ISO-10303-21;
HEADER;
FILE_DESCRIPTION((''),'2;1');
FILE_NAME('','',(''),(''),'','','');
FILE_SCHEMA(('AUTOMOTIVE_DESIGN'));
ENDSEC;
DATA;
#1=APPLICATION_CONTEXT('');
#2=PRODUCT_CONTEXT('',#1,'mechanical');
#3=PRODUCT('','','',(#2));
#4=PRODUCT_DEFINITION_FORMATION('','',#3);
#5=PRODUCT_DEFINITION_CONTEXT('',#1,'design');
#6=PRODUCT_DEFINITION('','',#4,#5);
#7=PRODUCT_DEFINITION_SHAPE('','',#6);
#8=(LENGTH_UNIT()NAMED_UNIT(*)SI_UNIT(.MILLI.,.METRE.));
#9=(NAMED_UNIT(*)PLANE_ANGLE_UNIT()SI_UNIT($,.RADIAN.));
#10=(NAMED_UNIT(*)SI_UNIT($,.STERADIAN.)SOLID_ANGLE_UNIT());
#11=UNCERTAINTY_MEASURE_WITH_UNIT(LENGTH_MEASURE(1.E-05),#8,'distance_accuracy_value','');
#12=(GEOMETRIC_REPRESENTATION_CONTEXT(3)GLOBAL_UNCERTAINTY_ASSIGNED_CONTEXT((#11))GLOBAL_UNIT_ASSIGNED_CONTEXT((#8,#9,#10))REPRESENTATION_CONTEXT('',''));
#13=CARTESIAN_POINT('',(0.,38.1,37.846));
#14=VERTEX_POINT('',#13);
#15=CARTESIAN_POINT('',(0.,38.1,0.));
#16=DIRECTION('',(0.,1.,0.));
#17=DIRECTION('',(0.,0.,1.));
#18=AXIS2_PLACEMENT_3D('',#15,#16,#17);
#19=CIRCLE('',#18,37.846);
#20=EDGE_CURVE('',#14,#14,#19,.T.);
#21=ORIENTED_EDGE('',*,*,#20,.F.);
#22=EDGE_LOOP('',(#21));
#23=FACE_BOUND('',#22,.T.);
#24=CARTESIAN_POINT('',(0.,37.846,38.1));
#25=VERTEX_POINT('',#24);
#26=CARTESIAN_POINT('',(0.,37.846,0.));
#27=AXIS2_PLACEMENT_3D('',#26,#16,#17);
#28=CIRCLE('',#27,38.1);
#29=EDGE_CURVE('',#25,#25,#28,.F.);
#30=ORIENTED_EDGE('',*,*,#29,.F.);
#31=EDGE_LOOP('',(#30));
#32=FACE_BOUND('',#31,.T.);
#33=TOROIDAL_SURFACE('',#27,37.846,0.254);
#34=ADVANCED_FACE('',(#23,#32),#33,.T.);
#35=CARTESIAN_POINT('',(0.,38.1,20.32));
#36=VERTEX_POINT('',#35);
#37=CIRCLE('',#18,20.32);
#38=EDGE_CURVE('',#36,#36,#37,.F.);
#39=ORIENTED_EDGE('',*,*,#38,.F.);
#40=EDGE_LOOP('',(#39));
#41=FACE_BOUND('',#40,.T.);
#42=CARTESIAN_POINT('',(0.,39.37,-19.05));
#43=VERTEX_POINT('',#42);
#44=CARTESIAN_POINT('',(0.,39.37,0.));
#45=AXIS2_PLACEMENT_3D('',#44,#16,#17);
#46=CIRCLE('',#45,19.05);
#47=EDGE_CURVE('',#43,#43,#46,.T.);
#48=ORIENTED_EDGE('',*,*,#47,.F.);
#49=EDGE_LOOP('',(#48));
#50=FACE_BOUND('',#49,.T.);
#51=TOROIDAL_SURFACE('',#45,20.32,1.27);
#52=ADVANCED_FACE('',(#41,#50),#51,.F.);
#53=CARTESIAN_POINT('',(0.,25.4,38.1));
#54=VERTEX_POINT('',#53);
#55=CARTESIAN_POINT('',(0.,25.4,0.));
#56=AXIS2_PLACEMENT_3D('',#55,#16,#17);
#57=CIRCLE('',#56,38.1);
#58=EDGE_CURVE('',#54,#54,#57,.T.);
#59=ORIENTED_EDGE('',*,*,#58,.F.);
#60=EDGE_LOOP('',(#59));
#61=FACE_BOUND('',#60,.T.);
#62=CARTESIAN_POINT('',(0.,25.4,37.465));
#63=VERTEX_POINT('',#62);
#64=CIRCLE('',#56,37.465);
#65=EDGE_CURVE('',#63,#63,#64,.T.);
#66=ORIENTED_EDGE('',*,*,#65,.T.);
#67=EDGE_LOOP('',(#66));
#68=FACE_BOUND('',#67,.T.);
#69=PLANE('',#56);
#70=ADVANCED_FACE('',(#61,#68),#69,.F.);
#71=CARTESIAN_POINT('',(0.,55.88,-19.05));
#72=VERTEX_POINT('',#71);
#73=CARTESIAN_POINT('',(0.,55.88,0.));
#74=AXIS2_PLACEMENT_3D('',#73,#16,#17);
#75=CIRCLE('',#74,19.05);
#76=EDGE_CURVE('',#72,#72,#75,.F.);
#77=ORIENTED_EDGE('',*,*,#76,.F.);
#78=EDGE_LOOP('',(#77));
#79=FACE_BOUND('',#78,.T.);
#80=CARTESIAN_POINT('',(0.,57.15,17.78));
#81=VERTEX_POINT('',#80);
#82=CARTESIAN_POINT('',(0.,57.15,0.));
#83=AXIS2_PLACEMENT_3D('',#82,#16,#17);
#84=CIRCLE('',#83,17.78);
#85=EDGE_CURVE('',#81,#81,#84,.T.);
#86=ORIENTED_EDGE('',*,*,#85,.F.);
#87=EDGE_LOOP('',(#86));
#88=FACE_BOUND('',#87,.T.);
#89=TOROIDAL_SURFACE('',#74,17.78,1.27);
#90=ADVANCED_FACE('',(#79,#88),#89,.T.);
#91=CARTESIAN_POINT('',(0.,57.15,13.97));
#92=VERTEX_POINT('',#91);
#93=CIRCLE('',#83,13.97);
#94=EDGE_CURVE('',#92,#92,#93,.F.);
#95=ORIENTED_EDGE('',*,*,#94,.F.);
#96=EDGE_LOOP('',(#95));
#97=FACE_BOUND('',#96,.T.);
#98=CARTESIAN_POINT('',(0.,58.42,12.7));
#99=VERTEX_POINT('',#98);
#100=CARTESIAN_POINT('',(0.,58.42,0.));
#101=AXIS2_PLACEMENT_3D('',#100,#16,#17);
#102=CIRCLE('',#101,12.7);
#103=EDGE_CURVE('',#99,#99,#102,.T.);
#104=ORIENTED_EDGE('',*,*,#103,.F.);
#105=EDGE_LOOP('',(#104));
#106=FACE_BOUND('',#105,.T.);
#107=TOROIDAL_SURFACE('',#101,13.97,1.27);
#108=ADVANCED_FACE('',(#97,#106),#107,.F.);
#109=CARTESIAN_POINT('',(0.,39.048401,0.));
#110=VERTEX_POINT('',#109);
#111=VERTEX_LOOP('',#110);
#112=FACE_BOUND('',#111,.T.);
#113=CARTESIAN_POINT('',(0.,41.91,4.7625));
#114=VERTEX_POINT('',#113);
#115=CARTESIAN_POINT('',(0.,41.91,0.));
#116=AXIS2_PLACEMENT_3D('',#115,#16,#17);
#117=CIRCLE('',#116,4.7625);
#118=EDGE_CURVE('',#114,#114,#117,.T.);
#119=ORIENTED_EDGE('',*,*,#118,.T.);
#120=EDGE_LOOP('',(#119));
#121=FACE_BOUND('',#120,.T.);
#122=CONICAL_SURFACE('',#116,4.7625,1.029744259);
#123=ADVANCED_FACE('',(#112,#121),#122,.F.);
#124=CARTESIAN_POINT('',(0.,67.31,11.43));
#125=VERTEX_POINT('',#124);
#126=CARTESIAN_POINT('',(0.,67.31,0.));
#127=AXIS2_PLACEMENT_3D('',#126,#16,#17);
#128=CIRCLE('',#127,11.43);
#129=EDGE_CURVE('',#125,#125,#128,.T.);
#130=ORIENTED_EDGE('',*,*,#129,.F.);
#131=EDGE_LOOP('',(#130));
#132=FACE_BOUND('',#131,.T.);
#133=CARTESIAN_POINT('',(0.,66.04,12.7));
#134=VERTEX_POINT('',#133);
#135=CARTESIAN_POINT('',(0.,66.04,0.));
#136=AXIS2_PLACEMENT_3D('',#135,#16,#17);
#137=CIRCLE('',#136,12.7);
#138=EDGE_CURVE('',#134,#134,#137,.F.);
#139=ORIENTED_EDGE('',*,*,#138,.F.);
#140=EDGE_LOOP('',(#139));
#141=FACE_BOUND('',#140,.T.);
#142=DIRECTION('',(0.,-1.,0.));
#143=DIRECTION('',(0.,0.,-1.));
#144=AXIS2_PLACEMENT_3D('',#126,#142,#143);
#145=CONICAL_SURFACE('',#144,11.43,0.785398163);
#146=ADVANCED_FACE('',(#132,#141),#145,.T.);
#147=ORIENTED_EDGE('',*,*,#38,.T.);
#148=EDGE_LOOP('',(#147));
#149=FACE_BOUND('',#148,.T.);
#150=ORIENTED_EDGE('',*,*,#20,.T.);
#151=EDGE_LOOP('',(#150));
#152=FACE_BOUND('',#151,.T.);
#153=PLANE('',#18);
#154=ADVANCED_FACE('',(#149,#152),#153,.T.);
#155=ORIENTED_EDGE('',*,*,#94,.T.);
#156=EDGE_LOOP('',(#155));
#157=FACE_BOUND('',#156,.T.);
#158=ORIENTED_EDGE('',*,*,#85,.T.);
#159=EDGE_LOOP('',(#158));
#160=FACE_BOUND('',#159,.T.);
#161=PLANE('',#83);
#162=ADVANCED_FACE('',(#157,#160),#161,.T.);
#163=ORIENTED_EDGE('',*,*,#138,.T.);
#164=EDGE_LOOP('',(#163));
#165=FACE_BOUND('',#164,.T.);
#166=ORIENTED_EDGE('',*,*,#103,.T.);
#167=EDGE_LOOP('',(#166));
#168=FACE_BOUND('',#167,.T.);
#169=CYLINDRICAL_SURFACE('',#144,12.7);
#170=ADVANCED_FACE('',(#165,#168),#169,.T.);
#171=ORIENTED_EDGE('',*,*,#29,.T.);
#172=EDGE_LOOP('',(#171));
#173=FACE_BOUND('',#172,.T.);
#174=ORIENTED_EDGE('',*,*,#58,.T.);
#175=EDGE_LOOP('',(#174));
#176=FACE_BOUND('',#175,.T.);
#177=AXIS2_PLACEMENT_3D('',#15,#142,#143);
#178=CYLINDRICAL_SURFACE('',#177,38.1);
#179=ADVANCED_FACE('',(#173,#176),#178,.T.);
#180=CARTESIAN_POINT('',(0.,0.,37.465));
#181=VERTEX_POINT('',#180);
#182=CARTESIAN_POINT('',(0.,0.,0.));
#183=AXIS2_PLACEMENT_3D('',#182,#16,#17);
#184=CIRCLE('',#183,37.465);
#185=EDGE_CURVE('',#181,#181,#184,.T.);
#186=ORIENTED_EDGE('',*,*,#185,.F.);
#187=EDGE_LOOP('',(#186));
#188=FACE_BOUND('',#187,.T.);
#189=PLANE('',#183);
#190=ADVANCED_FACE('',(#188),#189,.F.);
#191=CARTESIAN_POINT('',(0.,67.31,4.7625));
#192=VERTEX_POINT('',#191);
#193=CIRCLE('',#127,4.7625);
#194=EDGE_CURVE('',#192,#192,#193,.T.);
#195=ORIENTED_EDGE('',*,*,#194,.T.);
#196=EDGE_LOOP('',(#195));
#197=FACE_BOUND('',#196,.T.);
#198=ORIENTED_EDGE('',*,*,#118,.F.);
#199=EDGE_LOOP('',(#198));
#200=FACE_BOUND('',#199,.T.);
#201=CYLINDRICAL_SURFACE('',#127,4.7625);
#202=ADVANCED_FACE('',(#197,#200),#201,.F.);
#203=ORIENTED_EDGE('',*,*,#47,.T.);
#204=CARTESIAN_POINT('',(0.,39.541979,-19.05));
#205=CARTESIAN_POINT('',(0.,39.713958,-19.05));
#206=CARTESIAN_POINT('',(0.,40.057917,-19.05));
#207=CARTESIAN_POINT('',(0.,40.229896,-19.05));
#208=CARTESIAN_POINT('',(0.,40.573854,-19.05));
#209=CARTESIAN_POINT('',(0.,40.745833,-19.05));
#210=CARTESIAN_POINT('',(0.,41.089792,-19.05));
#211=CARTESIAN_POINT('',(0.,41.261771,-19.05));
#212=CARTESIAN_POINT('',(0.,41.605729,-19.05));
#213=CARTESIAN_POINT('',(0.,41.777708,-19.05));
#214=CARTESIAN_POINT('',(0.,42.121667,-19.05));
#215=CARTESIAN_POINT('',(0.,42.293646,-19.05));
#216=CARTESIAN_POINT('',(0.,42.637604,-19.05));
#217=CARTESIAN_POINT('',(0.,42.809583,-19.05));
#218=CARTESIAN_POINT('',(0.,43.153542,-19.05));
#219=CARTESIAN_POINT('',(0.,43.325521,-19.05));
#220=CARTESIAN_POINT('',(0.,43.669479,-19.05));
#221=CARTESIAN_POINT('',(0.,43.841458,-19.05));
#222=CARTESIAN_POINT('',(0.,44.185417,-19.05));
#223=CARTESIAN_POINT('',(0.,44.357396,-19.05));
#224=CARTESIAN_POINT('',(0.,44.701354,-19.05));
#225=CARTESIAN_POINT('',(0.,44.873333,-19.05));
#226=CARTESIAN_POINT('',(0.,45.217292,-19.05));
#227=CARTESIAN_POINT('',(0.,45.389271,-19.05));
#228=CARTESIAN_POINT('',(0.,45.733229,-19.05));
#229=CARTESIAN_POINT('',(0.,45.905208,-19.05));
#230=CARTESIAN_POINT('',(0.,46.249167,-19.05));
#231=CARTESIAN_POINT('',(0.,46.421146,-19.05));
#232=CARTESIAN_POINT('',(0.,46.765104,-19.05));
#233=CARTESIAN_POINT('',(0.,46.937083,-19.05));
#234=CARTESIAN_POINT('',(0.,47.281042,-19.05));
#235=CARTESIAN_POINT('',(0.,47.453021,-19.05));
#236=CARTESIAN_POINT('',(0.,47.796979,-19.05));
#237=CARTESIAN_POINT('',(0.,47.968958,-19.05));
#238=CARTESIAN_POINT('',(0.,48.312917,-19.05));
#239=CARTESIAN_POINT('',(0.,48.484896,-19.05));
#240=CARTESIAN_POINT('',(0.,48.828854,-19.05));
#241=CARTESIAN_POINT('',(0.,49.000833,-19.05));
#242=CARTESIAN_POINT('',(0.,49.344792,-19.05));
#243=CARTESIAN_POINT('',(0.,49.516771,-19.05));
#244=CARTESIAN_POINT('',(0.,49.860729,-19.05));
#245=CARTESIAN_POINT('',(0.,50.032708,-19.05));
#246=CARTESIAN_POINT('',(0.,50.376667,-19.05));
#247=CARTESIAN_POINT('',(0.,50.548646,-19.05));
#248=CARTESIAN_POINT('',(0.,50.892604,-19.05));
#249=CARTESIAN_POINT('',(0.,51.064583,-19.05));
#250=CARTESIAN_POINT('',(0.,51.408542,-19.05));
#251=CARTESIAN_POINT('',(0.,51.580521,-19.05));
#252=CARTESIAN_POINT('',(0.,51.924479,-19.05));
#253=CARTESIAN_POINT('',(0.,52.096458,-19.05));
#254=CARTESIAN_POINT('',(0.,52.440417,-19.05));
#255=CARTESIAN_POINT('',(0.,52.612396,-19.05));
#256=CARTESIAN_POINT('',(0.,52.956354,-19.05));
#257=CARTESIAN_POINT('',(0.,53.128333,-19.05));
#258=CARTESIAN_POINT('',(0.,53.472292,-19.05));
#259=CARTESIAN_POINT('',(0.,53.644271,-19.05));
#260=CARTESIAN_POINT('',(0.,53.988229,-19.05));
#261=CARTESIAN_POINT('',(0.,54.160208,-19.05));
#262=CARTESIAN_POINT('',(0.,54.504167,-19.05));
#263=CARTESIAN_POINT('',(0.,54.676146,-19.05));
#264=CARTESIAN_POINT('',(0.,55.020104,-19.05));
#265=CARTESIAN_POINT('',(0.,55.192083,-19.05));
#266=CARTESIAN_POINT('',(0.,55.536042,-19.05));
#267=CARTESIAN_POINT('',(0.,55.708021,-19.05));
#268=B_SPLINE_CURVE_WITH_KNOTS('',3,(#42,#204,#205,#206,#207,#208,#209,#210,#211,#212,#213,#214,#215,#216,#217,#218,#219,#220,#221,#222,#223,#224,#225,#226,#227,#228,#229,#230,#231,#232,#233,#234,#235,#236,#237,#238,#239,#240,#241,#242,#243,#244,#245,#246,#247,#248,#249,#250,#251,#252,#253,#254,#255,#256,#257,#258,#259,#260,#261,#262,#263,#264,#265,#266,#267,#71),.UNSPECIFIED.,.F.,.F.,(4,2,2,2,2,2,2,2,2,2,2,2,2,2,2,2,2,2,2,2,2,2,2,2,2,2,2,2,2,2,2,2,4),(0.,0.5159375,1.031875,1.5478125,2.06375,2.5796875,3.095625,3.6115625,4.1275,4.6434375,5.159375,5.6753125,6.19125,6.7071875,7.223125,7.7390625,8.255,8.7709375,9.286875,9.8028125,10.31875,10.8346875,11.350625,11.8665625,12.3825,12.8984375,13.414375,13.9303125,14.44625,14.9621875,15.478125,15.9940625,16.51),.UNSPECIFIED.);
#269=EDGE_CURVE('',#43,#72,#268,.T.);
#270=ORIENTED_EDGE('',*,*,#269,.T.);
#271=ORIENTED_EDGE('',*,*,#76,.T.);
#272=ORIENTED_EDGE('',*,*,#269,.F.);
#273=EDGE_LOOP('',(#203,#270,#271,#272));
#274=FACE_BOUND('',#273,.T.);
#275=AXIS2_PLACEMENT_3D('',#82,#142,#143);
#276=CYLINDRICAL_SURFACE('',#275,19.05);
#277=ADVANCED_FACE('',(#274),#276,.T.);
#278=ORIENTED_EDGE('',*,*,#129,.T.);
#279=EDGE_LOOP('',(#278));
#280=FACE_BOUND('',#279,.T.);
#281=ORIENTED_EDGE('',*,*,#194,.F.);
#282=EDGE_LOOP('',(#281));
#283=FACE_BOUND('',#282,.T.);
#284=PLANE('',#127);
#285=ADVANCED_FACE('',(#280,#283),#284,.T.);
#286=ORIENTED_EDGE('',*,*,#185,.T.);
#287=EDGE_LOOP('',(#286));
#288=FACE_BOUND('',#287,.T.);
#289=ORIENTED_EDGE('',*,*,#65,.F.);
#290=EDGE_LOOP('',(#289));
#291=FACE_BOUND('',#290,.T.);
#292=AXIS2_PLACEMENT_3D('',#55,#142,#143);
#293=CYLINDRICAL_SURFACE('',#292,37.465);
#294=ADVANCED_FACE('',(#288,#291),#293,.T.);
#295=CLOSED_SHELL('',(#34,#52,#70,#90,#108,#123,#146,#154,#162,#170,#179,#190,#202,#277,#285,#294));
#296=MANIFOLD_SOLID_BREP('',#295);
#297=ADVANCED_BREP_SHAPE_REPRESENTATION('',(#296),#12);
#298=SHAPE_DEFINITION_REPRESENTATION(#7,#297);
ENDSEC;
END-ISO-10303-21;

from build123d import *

# Parameters (mm, degrees)
SKETCH1_R                        = 37.465
BOSS_EXTRUDE1_DEPTH              = 25.4
SKETCH2_R                        = 38.1
BOSS_EXTRUDE2_DEPTH              = 12.7
SKETCH3_R                        = 19.05
BOSS_EXTRUDE3_DEPTH              = 19.05
SKETCH4_R                        = 12.7
BOSS_EXTRUDE4_DEPTH              = 10.16
FILLET1_SIZE                     = 1.27
FILLET2_R                        = 1.27
FILLET3_R                        = 0.254
FILLET4_R                        = 1.27
FILLET5_R                        = 1.27
F_3_8_0_375_DIAMETER_HOLE1_D     = 9.525
F_3_8_0_375_DIAMETER_HOLE1_DEPTH = 25.4
F_3_8_0_375_DIAMETER_HOLE1_TIP   = 2.861598698


with BuildPart() as part:
    # Sketch1 → Boss-Extrude1 (new body)
    with BuildSketch(Plane(origin=(0, 0, 0), x_dir=(1, 0, 0), z_dir=(0, 1, 0))):
        Circle(SKETCH1_R)
    extrude(amount=BOSS_EXTRUDE1_DEPTH)

    # Sketch2 → Boss-Extrude2 (add)
    with BuildSketch(Plane(origin=(0, 25.4, 0), x_dir=(1, 0, 0), z_dir=(0, 1, 0))):
        Circle(SKETCH2_R)
    extrude(amount=BOSS_EXTRUDE2_DEPTH)

    # Sketch3 → Boss-Extrude3 (add)
    with BuildSketch(Plane(origin=(0, 38.1, 0), x_dir=(1, 0, 0), z_dir=(0, 1, 0))):
        Circle(SKETCH3_R)
    extrude(amount=BOSS_EXTRUDE3_DEPTH)

    # Sketch4 → Boss-Extrude4 (add)
    with BuildSketch(Plane(origin=(0, 57.15, 0), x_dir=(1, 0, 0), z_dir=(0, 1, 0))):
        Circle(SKETCH4_R)
    extrude(amount=BOSS_EXTRUDE4_DEPTH)

    # Fillet1
    fillet1_edges = [part.edges().sort_by_distance(p)[0] for p in [
        (-12.7, 67.31, 0),
    ]]
    chamfer(fillet1_edges, length=FILLET1_SIZE)

    # Fillet2
    fillet2_edges = [part.edges().sort_by_distance(p)[0] for p in [
        (-19.05, 57.15, 0),
    ]]
    fillet(fillet2_edges, radius=FILLET2_R)

    # Fillet3
    fillet3_edges = [part.edges().sort_by_distance(p)[0] for p in [
        (-38.1, 38.1, 0),
    ]]
    fillet(fillet3_edges, radius=FILLET3_R)

    # Fillet4
    fillet4_edges = [part.edges().sort_by_distance(p)[0] for p in [
        (-19.05, 38.1, 0),
    ]]
    fillet(fillet4_edges, radius=FILLET4_R)

    # Fillet5
    fillet5_edges = [part.edges().sort_by_distance(p)[0] for p in [
        (-12.7, 57.15, 0),
    ]]
    fillet(fillet5_edges, radius=FILLET5_R)

    # 3/8 (0.375) Diameter Hole1
    with Locations(Plane(origin=(0, 67.31, 0), x_dir=(1, 0, 0), z_dir=(0, 1, 0))):
        with Locations((0, 0)):
            Hole(F_3_8_0_375_DIAMETER_HOLE1_D / 2, depth=F_3_8_0_375_DIAMETER_HOLE1_DEPTH)
            with Locations((0, 0, -(F_3_8_0_375_DIAMETER_HOLE1_DEPTH + F_3_8_0_375_DIAMETER_HOLE1_TIP / 2))):  # 118° drill point
                Cone(0, F_3_8_0_375_DIAMETER_HOLE1_D / 2, F_3_8_0_375_DIAMETER_HOLE1_TIP, mode=Mode.SUBTRACT)


solid = part.part
